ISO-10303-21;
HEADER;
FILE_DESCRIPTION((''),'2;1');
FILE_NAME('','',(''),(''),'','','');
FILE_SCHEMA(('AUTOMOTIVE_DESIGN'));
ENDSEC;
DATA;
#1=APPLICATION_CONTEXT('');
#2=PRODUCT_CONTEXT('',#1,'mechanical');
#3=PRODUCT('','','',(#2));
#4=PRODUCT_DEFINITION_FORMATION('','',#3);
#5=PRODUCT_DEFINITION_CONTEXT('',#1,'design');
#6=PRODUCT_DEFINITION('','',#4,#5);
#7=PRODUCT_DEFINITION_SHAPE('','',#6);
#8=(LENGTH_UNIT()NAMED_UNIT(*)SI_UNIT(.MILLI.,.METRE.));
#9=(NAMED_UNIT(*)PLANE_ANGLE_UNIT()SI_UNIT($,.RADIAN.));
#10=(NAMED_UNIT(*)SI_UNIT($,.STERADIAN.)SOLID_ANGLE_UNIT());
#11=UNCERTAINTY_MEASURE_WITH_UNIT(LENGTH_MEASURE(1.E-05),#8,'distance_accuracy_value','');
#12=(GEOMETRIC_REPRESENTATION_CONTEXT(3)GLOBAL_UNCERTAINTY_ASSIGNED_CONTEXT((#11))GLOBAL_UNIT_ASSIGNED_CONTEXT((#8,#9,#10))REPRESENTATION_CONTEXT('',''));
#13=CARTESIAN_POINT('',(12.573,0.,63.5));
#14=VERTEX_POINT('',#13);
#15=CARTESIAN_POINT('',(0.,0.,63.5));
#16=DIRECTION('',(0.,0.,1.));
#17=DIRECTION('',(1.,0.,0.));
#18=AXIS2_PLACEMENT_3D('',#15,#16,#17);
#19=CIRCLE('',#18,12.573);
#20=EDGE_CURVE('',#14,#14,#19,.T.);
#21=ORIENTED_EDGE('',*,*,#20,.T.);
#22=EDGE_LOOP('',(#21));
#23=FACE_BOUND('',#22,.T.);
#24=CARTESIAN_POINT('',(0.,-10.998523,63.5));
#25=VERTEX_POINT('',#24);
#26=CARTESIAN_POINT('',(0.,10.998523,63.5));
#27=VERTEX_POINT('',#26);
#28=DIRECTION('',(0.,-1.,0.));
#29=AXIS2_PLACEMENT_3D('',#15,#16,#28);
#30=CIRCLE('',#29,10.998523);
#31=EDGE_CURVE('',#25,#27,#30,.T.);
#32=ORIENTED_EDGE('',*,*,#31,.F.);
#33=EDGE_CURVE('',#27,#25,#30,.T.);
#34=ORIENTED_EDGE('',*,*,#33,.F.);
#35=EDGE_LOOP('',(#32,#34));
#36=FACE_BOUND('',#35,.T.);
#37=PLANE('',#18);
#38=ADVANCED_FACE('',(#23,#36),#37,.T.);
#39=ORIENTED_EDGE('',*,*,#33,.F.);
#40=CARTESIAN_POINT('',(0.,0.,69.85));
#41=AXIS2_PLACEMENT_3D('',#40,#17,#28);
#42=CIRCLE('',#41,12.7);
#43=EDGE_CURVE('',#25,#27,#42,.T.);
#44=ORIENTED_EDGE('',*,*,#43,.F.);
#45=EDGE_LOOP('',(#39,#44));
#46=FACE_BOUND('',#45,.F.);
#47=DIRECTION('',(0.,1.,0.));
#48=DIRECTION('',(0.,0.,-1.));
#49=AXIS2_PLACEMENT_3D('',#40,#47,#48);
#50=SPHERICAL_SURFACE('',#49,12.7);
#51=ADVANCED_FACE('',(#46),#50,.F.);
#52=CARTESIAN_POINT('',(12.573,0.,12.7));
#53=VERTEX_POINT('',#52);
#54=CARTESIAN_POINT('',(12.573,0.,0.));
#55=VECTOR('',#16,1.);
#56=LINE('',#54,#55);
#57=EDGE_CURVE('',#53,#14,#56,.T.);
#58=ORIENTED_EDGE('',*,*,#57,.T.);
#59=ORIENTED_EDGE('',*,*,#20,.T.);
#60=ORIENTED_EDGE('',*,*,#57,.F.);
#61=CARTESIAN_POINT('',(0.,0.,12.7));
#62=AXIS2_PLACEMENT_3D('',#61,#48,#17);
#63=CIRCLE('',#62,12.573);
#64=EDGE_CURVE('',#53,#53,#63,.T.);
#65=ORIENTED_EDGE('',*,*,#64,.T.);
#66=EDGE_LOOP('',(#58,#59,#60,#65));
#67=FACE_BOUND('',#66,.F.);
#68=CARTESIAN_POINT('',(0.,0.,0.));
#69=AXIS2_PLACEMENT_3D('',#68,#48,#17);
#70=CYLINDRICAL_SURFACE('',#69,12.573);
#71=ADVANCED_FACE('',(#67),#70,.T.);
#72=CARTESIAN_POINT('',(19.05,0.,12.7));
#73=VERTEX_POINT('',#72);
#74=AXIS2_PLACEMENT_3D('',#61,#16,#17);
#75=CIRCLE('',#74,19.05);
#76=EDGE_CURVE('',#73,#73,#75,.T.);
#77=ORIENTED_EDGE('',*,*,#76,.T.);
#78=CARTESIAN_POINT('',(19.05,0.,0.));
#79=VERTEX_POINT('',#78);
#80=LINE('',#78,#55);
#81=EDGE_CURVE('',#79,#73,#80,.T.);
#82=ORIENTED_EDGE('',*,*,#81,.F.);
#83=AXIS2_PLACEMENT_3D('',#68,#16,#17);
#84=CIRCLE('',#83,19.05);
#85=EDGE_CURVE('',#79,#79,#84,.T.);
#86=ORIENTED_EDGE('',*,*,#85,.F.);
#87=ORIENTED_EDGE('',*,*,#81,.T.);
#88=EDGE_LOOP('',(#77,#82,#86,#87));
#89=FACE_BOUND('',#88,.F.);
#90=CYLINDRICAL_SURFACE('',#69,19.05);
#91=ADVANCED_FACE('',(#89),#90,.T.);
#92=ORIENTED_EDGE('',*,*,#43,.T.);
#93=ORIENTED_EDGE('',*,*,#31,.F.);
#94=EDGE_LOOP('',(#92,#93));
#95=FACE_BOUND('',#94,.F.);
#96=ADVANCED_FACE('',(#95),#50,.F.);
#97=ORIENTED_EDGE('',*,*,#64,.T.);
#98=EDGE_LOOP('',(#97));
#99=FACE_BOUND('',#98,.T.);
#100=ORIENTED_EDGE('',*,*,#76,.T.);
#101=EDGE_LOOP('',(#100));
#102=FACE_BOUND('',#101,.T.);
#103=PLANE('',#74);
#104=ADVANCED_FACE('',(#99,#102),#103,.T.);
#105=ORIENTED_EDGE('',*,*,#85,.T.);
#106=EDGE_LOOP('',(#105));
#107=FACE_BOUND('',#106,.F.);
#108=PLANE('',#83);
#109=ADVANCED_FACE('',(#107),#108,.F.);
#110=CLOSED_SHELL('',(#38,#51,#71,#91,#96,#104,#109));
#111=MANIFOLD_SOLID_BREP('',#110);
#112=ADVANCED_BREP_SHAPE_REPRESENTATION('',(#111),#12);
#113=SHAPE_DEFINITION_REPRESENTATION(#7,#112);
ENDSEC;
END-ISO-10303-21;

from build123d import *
from build123d import SkipClean  # not in build123d's __all__

# Parameters (mm, degrees)
F0_R     = 19.05
F1_DEPTH = 12.7
F2_R     = 12.573
F3_DEPTH = 63.5


with BuildPart() as f1:
    # F0 (on Top) → F1 (new body)
    with BuildSketch(Plane.XY):
        Circle(F0_R)
    extrude(amount=F1_DEPTH)

    # F2 (on Top) → F3 (join)
    with BuildSketch(Plane.XY):
        Circle(F2_R)
    extrude(amount=F3_DEPTH)

    # F4 (on Right) → F6 (revolve, cut)
    with BuildSketch(Plane.YZ):
        with BuildLine():
            Line((12.7, 69.85), (-12.7, 69.85))
            ThreePointArc((-12.7, 69.85), (0, 57.15), (12.7, 69.85))
        make_face()
    with SkipClean():  # cleaning this boolean's faces spoils the solid; the shape is the same uncleaned
        revolve(axis=Axis((0, -1.6116397455, 69.85), (0, 1, 0)), mode=Mode.SUBTRACT)


solid = f1.part
